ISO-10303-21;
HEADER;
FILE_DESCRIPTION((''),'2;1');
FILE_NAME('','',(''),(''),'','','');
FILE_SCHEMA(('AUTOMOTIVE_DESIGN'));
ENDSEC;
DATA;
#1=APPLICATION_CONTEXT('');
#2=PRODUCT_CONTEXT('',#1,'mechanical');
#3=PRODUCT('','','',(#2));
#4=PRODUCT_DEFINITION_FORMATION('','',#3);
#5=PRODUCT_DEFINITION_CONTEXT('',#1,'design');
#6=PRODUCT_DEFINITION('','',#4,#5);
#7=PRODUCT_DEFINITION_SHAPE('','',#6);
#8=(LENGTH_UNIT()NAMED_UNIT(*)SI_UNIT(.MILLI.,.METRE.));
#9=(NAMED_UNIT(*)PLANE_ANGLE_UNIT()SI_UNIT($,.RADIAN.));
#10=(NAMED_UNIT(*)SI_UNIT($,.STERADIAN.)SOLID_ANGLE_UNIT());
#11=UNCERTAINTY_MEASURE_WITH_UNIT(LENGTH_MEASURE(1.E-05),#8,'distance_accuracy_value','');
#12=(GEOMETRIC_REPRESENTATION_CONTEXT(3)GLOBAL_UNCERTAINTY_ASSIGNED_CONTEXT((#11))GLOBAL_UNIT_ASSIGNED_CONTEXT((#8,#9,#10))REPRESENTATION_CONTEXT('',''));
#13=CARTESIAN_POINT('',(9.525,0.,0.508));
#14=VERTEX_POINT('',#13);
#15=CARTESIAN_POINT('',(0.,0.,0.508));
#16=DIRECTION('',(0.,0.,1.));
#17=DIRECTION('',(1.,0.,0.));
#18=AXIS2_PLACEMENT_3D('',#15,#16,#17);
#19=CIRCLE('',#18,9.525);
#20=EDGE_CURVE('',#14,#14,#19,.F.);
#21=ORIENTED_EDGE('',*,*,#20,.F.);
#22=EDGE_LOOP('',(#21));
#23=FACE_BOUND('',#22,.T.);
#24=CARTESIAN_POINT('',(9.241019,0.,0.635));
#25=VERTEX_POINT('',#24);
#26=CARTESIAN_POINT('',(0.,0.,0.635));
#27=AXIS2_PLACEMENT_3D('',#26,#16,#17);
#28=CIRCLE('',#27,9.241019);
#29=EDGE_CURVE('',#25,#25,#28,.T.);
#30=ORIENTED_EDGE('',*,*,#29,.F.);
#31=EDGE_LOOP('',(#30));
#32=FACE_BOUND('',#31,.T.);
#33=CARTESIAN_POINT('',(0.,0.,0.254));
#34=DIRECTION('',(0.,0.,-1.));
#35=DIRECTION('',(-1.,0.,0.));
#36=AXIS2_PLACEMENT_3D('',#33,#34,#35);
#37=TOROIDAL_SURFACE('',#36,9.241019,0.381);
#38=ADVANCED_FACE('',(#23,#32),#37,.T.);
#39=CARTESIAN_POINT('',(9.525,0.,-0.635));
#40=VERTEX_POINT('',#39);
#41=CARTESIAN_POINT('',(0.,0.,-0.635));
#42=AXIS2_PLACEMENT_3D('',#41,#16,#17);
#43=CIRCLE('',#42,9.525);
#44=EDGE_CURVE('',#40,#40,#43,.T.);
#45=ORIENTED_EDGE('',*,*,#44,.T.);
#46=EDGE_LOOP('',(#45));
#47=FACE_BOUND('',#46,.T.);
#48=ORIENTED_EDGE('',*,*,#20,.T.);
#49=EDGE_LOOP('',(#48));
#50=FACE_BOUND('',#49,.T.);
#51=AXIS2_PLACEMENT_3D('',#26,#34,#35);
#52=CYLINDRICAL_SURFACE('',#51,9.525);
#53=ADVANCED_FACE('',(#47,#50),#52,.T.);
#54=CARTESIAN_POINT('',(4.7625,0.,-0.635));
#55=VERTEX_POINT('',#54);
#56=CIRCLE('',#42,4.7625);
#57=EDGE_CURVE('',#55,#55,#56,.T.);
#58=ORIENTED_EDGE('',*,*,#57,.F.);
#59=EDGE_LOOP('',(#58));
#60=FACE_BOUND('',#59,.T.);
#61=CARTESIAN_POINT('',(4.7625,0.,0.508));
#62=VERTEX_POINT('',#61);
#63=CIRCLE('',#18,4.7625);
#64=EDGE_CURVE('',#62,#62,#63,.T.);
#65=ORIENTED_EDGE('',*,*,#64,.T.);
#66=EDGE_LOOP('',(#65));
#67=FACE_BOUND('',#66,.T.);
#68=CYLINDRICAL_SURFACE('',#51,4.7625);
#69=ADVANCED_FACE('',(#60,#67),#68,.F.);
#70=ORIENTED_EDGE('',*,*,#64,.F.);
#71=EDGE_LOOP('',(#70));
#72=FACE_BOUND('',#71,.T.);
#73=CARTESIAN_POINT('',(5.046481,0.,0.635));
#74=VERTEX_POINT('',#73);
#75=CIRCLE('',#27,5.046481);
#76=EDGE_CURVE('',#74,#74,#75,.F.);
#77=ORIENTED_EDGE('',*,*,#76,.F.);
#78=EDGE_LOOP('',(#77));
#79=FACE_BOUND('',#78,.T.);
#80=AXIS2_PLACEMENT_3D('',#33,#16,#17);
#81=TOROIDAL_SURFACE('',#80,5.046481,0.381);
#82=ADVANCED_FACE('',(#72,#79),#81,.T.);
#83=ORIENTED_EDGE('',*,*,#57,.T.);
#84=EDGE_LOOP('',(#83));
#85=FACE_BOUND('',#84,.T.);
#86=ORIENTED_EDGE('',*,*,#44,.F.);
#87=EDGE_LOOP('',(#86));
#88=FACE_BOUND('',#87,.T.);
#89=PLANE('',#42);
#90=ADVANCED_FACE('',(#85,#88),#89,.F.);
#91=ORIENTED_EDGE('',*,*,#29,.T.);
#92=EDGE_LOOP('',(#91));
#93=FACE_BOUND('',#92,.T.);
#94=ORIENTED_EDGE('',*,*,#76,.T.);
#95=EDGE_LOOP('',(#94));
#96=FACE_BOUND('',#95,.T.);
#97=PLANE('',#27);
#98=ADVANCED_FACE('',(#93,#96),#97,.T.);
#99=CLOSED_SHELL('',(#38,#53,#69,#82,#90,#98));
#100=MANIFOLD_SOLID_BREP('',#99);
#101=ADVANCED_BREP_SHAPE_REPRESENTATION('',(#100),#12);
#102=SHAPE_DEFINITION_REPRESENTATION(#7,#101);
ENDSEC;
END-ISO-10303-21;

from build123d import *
from OCP.BRepFilletAPI import BRepFilletAPI_MakeChamfer

# Parameters (mm, degrees)
BOSS_EXTRUDE1_START = -0.635
SKETCH3_R           = 9.525
SKETCH3_R_2         = 4.7625
BOSS_EXTRUDE1_DEPTH = 1.27
CHAMFER1_SIZE       = 0.127
CHAMFER1_SIZE2      = 0.073323484
FILLET1_R           = 0.381


with BuildPart() as part:
    # Sketch3 → Boss-Extrude1 (new body)
    with BuildSketch(Plane.XY.offset(BOSS_EXTRUDE1_START)):
        Circle(SKETCH3_R)
        Circle(SKETCH3_R_2, mode=Mode.SUBTRACT)
    extrude(amount=BOSS_EXTRUDE1_DEPTH)

    # Chamfer1: one chamfer whose edges measure the first distance from different faces: ONE call of the kernel's chamfer builder (chamfer() names one face for all edges)
    chamfer1_edges_1 = [part.edges().sort_by_distance(p)[0] for p in [
        (-9.525, 0, 0.635),
    ]]
    chamfer1_side_1 = [part.faces().sort_by_distance(p)[0] for p in [
        (-9.525, 0, 0),
    ]]
    chamfer1_edges_2 = [part.edges().sort_by_distance(p)[0] for p in [
        (-4.7625, 0, 0.635),
    ]]
    chamfer1_side_2 = [part.faces().sort_by_distance(p)[0] for p in [
        (-4.7625, 0, 0),
    ]]
    chamfer1 = BRepFilletAPI_MakeChamfer(part.part.solid().wrapped)
    for e in chamfer1_edges_1:
        chamfer1.Add(CHAMFER1_SIZE, CHAMFER1_SIZE2, e.wrapped, chamfer1_side_1[0].wrapped)  # the first distance lies on this face
    for e in chamfer1_edges_2:
        chamfer1.Add(CHAMFER1_SIZE, CHAMFER1_SIZE2, e.wrapped, chamfer1_side_2[0].wrapped)  # the first distance lies on this face
    add(Compound.cast(chamfer1.Shape()), mode=Mode.REPLACE)

    # Fillet1
    # the kernel refuses this fillet: 0.381 mm, written as the material it takes off along each edge
    with BuildSketch(Plane(origin=(0, 0, 0.635), x_dir=(1, 0, 0), z_dir=(0, -1, 0))) as fillet1_piece_1:
        with BuildLine():
            CenterArc((9.241019367, -0.381), FILLET1_R, 41.810314896, 48.189685104)
            Line((9.241019367, 0), (9.241019367, 0.00762))
            Line((9.241019367, 0.00762), (9.451676516, 0.00762))
            Line((9.451676516, 0.00762), (9.458275629, 0.00381))
            ThreePointArc((9.458275629, 0.00381), (9.494937371, -0.05969), (9.530679613, -0.12192))
            Line((9.530679613, -0.12192), (9.525, -0.127))
        make_face()
    revolve(axis=Axis((0, 0, 0.635), (0, 0, 1)), mode=Mode.SUBTRACT)
    with BuildSketch(Plane(origin=(0, 0, 0.635), x_dir=(1, 0, 0), z_dir=(0, -1, 0))) as fillet1_piece_2:
        with BuildLine():
            CenterArc((5.046480633, -0.381), FILLET1_R, 90, 48.189685104)
            Line((4.7625, -0.127), (4.756820387, -0.12192))
            ThreePointArc((4.756820387, -0.12192), (4.792562629, -0.05969), (4.829224371, 0.00381))
            Line((4.829224371, 0.00381), (4.835823484, 0.00762))
            Line((4.835823484, 0.00762), (5.046480633, 0.00762))
            Line((5.046480633, 0.00762), (5.046480633, 0))
        make_face()
    revolve(axis=Axis((0, 0, 0.635), (0, 0, 1)), mode=Mode.SUBTRACT)


solid = part.part
